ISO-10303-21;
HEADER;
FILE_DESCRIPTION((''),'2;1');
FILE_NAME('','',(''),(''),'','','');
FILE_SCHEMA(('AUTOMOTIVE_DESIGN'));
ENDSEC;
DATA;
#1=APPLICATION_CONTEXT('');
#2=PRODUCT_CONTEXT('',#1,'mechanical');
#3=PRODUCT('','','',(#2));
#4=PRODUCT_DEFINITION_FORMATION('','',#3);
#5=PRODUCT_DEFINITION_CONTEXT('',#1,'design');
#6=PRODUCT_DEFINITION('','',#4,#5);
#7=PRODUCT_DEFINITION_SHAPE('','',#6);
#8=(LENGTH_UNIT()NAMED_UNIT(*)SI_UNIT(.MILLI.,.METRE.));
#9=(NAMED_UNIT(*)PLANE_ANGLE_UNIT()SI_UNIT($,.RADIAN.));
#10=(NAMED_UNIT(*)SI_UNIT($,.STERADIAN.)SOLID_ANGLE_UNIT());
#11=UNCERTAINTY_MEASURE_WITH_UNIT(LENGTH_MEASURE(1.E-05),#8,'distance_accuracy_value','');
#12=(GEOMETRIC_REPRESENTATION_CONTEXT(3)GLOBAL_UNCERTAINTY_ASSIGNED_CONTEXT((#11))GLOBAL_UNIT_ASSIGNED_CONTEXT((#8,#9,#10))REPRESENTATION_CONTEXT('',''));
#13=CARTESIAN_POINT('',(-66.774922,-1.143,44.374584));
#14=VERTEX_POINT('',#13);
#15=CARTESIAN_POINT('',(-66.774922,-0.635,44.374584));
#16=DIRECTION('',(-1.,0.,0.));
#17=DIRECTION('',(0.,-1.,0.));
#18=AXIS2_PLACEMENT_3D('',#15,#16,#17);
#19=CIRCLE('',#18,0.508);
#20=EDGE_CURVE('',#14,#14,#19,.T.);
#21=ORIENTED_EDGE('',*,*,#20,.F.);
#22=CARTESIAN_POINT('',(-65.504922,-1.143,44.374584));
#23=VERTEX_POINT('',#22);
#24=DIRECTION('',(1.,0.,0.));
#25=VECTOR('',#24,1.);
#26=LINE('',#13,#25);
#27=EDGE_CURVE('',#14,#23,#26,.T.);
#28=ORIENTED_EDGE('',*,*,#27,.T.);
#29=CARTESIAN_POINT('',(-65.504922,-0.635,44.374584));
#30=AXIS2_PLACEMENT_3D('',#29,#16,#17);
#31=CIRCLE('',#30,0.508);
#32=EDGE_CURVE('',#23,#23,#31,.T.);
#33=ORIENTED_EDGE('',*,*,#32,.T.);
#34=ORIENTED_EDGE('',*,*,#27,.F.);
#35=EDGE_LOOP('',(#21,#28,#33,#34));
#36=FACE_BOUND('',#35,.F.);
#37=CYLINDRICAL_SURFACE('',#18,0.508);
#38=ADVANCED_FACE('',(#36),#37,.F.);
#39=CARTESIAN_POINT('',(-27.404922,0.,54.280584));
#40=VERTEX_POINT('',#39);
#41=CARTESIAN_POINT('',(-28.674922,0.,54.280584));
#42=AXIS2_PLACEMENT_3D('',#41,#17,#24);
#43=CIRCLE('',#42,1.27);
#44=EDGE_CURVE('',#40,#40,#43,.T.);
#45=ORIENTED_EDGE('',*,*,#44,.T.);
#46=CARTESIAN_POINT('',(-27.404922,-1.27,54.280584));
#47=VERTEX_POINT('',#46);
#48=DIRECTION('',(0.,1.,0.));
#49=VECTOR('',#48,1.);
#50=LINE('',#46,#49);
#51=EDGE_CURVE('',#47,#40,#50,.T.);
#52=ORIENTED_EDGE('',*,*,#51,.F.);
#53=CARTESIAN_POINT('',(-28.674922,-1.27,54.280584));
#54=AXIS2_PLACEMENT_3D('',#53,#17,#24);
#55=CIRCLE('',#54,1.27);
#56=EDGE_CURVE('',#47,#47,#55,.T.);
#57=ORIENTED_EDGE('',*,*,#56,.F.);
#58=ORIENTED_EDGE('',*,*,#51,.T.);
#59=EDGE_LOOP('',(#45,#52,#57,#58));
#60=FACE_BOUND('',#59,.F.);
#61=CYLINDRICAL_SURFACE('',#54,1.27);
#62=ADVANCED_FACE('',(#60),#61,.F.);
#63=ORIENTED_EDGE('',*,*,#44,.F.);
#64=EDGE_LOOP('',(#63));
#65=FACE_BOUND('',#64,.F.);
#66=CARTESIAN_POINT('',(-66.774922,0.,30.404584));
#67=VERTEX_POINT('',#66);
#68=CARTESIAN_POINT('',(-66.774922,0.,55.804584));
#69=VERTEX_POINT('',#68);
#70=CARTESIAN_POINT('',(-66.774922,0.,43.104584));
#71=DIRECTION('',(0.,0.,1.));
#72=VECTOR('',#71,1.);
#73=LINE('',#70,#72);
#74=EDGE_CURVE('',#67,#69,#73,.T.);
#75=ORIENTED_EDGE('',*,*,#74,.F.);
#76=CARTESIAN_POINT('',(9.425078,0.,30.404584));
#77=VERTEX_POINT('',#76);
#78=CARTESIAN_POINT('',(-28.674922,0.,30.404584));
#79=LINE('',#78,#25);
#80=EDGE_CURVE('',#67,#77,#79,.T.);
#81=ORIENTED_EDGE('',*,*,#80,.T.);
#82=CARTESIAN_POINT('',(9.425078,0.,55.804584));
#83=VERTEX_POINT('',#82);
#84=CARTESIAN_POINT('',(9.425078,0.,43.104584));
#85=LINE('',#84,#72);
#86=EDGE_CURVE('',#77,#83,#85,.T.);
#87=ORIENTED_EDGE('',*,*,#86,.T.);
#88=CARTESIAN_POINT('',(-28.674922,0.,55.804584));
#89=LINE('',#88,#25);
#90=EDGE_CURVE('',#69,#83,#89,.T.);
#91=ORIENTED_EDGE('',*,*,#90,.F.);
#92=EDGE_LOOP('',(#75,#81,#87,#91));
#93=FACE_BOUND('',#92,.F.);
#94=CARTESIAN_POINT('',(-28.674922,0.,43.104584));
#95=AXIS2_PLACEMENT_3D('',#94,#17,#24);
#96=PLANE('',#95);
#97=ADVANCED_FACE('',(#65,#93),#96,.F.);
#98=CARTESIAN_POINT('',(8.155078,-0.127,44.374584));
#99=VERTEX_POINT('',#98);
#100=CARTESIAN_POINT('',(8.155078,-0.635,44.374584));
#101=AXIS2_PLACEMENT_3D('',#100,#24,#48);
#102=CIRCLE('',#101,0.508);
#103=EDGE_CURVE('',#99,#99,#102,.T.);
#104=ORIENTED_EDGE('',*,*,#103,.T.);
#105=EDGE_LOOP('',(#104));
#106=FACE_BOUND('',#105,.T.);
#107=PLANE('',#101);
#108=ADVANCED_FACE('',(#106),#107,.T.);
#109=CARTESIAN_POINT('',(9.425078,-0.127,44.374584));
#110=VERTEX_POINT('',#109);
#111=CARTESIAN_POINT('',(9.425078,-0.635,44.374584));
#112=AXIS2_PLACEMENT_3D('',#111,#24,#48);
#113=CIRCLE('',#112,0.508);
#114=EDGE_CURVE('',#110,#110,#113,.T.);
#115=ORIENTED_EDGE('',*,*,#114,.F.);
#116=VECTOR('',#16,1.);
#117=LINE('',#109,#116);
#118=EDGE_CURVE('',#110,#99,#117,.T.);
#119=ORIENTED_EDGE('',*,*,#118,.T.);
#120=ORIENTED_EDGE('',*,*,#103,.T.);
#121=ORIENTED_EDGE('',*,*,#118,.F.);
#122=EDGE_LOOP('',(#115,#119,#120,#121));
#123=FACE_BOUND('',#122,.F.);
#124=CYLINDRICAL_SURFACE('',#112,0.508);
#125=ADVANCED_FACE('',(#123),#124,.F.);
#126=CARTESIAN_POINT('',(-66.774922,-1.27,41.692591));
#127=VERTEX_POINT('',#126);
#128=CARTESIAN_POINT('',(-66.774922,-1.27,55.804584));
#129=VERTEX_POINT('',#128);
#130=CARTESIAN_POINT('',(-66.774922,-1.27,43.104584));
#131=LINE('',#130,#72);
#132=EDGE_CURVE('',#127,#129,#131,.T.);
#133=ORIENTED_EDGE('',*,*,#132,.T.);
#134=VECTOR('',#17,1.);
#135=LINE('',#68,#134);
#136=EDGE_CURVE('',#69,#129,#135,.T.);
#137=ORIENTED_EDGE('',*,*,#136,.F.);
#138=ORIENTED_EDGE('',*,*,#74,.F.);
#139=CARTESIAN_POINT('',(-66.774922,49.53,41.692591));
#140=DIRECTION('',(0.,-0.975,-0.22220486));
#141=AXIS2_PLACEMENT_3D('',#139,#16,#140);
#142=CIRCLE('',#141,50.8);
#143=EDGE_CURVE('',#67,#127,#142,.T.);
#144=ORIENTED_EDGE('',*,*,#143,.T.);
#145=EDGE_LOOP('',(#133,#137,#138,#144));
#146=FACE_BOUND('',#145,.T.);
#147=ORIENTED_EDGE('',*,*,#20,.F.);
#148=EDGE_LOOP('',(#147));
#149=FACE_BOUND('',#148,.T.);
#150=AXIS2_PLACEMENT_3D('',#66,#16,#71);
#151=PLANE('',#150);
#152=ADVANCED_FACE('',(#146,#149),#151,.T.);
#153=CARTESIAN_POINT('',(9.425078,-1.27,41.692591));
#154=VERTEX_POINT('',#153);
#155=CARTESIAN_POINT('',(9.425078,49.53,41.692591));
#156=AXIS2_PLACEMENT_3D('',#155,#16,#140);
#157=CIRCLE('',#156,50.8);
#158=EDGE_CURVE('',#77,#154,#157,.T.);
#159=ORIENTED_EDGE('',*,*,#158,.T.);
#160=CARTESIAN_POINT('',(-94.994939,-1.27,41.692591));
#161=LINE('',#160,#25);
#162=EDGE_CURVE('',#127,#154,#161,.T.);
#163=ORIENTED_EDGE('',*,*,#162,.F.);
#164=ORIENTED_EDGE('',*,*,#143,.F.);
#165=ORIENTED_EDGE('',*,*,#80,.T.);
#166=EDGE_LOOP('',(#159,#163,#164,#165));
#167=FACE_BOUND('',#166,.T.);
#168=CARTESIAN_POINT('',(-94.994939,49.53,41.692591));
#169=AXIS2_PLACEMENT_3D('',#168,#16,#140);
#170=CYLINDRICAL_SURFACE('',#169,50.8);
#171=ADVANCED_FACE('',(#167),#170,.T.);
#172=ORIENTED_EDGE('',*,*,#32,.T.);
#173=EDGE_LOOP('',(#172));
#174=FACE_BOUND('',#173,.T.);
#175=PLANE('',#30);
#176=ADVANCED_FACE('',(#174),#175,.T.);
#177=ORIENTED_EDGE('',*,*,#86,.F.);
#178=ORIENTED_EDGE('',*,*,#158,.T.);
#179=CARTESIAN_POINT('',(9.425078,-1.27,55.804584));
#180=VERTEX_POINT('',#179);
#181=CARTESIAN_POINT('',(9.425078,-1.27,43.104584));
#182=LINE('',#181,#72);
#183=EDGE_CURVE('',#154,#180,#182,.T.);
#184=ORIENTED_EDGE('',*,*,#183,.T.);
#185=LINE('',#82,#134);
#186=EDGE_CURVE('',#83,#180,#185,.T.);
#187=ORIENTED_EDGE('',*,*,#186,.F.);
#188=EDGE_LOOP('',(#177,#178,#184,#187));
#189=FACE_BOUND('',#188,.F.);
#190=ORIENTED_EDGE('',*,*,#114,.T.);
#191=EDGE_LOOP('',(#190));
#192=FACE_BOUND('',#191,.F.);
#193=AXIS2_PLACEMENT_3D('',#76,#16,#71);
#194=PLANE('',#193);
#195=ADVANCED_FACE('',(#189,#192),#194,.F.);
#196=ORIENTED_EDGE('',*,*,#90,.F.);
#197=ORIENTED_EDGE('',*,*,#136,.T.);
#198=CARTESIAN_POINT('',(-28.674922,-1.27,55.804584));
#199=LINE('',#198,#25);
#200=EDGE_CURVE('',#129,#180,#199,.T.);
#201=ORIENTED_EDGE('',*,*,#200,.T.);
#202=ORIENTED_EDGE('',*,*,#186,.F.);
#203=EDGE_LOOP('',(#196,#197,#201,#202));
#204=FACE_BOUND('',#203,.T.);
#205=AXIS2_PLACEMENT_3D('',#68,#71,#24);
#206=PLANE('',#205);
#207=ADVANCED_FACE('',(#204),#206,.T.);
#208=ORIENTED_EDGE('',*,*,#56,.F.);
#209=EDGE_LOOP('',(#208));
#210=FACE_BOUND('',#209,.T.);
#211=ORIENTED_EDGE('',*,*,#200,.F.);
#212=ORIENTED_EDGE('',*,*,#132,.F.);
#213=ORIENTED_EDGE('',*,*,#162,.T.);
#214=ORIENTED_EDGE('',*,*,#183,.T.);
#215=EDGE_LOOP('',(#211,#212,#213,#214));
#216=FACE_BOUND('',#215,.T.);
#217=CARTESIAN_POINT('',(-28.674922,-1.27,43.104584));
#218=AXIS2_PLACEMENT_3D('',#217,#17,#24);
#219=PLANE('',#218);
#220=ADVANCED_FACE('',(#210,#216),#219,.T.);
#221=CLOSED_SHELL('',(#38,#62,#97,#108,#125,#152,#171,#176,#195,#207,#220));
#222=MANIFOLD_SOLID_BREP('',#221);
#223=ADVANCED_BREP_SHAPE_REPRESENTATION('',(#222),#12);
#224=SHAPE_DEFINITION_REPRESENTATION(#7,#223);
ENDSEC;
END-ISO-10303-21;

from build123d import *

# Parameters (mm, degrees)
F0_W        = 76.2
F0_H        = 25.4
F1_DEPTH    = 1.27
F2_T1_DEPTH = 132.64003455
F3_R        = 0.508
F4_DEPTH    = 1.27
F5_R        = 0.508
F6_DEPTH    = 1.27
F7_R        = 1.27
F8_DEPTH    = 25.4


# Not quite as in the source:
# - a fillet or chamfer that OpenCascade refuses, or shapes differently, is made with other operations: its cross-section is extruded or revolved along the edge and cut away or added


with BuildPart() as f1:
    # F0 (on Front) → F1 (new body)
    with BuildSketch(Plane.XZ):
        with Locations((-28.6749217987, 43.1045838744)):
            Rectangle(F0_W, F0_H)
    extrude(amount=F1_DEPTH)

    # F2: fillet of radius 50.8 on 1 edges, made by hand

    # F2_s2 → F2_t1 (cut)
    with BuildSketch(Plane.YZ.offset(-94.9949390737)):
        with BuildLine():
            ThreePointArc((0, 30.4045838744), (-0.9515015625, 36.0129781215), (-1.27, 41.6925907843))
            Line((-1.27, 41.6925907843), (-2.286, 41.6925907843))
            Line((-2.286, 41.6925907843), (-2.286, 30.4045838744))
            Line((-2.286, 30.4045838744), (-1.27, 29.3885838744))
            ThreePointArc((-1.27, 29.3885838744), (-0.635, 29.3885838744), (-0.9906, 30.1788237362))
            Line((-0.9906, 30.1788237362), (0, 30.4045838744))
        make_face()
    extrude(amount=F2_T1_DEPTH, mode=Mode.SUBTRACT)

    # F3 (on face) → F4 (cut)
    with BuildSketch(Plane(origin=(-66.7749217987, 0, 0), x_dir=(0, -1, 0), z_dir=(-1, 0, 0))):
        with Locations((0.635, 44.3745838744)):
            Circle(F3_R)
    extrude(amount=-F4_DEPTH, mode=Mode.SUBTRACT)

    # F5 (on face) → F6 (cut)
    with BuildSketch(Plane.YZ.offset(9.4250782013)):
        with Locations((-0.635, 44.3745838744)):
            Circle(F5_R)
    extrude(amount=-F6_DEPTH, mode=Mode.SUBTRACT)

    # F7 (on face) → F8 (cut)
    with BuildSketch(Plane.XZ.offset(1.27)):
        with Locations((-28.6749217987, 54.2805838744)):
            Circle(F7_R)
    extrude(amount=-F8_DEPTH, mode=Mode.SUBTRACT)


solid = f1.part
